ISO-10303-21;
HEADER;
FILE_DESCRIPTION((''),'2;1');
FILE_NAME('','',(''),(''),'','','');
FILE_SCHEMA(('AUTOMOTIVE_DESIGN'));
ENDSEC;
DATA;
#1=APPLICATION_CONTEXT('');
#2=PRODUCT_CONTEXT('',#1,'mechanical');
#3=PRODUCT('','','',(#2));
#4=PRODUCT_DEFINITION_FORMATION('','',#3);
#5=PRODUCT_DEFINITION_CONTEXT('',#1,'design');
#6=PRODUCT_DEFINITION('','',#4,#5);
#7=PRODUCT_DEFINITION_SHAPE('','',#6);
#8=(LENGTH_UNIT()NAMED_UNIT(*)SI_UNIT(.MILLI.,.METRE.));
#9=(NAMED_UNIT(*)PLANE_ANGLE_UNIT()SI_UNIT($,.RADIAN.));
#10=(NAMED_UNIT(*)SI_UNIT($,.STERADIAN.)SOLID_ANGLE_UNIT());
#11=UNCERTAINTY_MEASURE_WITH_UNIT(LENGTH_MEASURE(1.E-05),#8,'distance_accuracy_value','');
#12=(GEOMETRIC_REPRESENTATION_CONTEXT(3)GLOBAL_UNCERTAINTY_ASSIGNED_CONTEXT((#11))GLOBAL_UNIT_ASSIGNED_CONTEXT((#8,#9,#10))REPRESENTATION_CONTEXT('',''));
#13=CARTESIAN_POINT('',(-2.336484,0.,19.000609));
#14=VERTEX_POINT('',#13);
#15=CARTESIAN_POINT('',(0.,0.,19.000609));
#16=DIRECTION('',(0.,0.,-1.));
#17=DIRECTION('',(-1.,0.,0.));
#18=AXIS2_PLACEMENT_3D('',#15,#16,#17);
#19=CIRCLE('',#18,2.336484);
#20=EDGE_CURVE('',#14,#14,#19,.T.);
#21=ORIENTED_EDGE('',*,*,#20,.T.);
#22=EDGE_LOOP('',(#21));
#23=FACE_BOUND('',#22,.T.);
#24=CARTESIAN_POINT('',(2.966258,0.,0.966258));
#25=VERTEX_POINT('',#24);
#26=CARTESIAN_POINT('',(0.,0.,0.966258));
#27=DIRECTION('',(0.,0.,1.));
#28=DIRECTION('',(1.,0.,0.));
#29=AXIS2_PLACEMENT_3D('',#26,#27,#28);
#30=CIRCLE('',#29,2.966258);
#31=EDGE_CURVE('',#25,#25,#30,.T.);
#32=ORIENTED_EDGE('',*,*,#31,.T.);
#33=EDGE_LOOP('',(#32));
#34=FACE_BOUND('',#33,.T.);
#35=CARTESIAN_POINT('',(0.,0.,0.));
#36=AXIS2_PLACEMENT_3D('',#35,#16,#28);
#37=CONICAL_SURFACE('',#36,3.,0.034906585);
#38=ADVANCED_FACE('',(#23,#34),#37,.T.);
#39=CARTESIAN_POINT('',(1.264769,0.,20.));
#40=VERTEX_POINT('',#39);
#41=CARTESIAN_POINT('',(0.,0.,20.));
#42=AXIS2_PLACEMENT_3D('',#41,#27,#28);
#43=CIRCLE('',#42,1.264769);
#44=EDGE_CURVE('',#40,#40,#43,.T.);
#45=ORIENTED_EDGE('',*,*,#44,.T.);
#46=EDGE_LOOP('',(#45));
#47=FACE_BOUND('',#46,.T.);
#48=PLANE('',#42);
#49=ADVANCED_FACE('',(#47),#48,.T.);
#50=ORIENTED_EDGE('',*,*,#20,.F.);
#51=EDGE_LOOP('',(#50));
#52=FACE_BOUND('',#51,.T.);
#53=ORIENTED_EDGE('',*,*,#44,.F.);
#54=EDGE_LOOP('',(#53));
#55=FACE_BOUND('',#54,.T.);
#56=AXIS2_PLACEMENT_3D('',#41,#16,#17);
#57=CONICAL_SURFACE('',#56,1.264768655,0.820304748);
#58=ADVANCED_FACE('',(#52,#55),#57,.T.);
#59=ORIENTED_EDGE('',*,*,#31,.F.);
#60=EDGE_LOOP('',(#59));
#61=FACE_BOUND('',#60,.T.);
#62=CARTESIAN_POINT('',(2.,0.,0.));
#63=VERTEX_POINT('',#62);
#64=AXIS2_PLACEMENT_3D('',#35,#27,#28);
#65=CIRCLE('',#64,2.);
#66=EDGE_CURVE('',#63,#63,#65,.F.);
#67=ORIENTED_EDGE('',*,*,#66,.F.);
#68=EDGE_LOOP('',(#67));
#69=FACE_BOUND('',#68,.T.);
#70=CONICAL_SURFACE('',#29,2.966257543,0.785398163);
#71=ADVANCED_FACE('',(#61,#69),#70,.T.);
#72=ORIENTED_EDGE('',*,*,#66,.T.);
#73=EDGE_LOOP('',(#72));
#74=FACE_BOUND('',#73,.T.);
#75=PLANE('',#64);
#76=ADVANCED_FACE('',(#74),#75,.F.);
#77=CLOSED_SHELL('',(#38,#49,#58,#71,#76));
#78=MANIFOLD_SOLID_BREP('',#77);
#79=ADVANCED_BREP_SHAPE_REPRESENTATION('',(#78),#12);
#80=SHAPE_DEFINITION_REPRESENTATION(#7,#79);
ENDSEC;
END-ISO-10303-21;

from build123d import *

# Parameters (mm, degrees)
SKETCH_1_R       = 3
EXTRUDE_1_DEPTH  = 20
EXTRUDE_1_TAPER  = 2
CHAMFER_1_SIZE   = 1
CHAMFER_1_SIZE_2 = 0.96684652
CHAMFER_1_SIZE_3 = 1.036815955


with BuildPart() as part:
    # 草图1 → 凸台-拉伸1 (new body)
    with BuildSketch(Plane.XY):
        Circle(SKETCH_1_R)
    extrude(amount=EXTRUDE_1_DEPTH, taper=EXTRUDE_1_TAPER)

    # 倒角1
    # the kernel refuses this chamfer: 1.036815955, 1, 0.96684652 mm, written as the material it takes off along each edge
    with BuildSketch(Plane(origin=(0, 0, 0), x_dir=(1, 0, 0), z_dir=(0, 1, 0))) as chamfer_1_piece_1:
        Polygon((3 - CHAMFER_1_SIZE, 0), (3 - CHAMFER_1_SIZE_2 * 0.0348994966969, -CHAMFER_1_SIZE_2 * 0.999390826859), (3, 0), align=None)
    revolve(axis=Axis((0, 0, 0), (0, 0, -1)), mode=Mode.SUBTRACT)
    with BuildSketch(Plane(origin=(0, 0, 20), x_dir=(1, 0, 0), z_dir=(0, 1, 0))) as chamfer_1_piece_2:
        Polygon((2.30158461 + CHAMFER_1_SIZE * 0.0348994967025, CHAMFER_1_SIZE * 0.999390827019), (2.30158461 - CHAMFER_1_SIZE_3, 0), (2.30158461, 0), align=None)
    revolve(axis=Axis((0, 0, 20), (0, 0, -1)), mode=Mode.SUBTRACT)


solid = part.part
